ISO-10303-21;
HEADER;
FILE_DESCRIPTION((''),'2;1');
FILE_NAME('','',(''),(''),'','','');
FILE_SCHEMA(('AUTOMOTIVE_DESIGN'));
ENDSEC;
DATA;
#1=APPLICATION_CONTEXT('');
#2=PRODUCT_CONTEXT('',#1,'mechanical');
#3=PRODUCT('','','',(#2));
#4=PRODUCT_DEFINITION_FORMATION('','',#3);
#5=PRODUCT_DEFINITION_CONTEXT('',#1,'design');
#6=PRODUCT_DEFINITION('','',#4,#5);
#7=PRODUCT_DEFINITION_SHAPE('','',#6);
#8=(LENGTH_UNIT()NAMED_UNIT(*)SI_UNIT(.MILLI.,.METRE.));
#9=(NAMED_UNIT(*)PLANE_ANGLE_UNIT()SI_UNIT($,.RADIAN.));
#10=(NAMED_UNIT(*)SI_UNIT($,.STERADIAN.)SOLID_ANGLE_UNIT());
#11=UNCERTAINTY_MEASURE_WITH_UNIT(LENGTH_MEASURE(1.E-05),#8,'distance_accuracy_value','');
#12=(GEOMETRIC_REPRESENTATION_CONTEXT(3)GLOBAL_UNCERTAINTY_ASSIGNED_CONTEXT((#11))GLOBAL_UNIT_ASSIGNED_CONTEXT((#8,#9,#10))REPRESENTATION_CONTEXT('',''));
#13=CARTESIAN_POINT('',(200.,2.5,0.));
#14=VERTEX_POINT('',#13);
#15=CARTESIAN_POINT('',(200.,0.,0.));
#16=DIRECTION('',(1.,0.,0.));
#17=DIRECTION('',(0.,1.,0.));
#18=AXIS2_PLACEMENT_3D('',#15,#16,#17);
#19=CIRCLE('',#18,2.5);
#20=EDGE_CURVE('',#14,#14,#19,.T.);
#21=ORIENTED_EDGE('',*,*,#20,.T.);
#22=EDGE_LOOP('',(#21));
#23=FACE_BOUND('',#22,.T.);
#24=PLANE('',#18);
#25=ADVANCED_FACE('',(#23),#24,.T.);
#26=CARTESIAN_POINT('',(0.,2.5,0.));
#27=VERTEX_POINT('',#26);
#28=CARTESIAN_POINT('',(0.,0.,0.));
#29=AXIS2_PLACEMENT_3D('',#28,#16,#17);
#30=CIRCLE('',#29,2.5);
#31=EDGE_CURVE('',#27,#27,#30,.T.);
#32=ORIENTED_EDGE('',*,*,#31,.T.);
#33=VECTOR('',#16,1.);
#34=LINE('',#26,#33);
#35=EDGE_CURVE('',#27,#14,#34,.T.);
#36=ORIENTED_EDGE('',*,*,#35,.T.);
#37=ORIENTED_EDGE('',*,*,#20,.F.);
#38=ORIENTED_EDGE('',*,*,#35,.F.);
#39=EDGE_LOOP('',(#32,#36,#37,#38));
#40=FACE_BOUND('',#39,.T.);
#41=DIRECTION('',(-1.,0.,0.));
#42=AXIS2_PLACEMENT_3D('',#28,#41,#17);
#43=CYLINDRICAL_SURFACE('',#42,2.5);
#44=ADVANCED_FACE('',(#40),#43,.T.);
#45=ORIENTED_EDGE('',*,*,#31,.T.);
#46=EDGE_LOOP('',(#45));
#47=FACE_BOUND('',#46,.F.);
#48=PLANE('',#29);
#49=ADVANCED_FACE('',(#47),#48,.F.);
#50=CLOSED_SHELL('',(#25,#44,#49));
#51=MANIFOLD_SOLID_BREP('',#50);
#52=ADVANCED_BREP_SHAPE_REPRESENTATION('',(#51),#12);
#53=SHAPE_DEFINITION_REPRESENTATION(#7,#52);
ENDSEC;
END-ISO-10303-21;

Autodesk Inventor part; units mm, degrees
ref_plane "YZ Plane" through (0, 0, 0) normal (1, 0, 0) x (0, 1, 0)
ref_plane "XZ Plane" through (0, 0, 0) normal (0, 1, 0) x (-1, 0, 0)
ref_plane "XY Plane" through (0, 0, 0) normal (0, 0, 1) x (1, 0, 0)
sketch "sketch1" plane through (0, 0, 0) normal (1, 0, 0) x (0, 1, 0)
  circle A0 centre (0, 0) radius 2.5
  dimension "d0" = 5
extrude "押し出し1" add sketch "sketch1" along normal blind 200
thread "Thread1" size "M5x0.8" class "6g" standard "ANSI Metric M Profile" length 26
thread "Thread2" size "M5x0.8" class "6g" standard "ANSI Metric M Profile" length 26
properties part number "feed-rod" material "Copper"
